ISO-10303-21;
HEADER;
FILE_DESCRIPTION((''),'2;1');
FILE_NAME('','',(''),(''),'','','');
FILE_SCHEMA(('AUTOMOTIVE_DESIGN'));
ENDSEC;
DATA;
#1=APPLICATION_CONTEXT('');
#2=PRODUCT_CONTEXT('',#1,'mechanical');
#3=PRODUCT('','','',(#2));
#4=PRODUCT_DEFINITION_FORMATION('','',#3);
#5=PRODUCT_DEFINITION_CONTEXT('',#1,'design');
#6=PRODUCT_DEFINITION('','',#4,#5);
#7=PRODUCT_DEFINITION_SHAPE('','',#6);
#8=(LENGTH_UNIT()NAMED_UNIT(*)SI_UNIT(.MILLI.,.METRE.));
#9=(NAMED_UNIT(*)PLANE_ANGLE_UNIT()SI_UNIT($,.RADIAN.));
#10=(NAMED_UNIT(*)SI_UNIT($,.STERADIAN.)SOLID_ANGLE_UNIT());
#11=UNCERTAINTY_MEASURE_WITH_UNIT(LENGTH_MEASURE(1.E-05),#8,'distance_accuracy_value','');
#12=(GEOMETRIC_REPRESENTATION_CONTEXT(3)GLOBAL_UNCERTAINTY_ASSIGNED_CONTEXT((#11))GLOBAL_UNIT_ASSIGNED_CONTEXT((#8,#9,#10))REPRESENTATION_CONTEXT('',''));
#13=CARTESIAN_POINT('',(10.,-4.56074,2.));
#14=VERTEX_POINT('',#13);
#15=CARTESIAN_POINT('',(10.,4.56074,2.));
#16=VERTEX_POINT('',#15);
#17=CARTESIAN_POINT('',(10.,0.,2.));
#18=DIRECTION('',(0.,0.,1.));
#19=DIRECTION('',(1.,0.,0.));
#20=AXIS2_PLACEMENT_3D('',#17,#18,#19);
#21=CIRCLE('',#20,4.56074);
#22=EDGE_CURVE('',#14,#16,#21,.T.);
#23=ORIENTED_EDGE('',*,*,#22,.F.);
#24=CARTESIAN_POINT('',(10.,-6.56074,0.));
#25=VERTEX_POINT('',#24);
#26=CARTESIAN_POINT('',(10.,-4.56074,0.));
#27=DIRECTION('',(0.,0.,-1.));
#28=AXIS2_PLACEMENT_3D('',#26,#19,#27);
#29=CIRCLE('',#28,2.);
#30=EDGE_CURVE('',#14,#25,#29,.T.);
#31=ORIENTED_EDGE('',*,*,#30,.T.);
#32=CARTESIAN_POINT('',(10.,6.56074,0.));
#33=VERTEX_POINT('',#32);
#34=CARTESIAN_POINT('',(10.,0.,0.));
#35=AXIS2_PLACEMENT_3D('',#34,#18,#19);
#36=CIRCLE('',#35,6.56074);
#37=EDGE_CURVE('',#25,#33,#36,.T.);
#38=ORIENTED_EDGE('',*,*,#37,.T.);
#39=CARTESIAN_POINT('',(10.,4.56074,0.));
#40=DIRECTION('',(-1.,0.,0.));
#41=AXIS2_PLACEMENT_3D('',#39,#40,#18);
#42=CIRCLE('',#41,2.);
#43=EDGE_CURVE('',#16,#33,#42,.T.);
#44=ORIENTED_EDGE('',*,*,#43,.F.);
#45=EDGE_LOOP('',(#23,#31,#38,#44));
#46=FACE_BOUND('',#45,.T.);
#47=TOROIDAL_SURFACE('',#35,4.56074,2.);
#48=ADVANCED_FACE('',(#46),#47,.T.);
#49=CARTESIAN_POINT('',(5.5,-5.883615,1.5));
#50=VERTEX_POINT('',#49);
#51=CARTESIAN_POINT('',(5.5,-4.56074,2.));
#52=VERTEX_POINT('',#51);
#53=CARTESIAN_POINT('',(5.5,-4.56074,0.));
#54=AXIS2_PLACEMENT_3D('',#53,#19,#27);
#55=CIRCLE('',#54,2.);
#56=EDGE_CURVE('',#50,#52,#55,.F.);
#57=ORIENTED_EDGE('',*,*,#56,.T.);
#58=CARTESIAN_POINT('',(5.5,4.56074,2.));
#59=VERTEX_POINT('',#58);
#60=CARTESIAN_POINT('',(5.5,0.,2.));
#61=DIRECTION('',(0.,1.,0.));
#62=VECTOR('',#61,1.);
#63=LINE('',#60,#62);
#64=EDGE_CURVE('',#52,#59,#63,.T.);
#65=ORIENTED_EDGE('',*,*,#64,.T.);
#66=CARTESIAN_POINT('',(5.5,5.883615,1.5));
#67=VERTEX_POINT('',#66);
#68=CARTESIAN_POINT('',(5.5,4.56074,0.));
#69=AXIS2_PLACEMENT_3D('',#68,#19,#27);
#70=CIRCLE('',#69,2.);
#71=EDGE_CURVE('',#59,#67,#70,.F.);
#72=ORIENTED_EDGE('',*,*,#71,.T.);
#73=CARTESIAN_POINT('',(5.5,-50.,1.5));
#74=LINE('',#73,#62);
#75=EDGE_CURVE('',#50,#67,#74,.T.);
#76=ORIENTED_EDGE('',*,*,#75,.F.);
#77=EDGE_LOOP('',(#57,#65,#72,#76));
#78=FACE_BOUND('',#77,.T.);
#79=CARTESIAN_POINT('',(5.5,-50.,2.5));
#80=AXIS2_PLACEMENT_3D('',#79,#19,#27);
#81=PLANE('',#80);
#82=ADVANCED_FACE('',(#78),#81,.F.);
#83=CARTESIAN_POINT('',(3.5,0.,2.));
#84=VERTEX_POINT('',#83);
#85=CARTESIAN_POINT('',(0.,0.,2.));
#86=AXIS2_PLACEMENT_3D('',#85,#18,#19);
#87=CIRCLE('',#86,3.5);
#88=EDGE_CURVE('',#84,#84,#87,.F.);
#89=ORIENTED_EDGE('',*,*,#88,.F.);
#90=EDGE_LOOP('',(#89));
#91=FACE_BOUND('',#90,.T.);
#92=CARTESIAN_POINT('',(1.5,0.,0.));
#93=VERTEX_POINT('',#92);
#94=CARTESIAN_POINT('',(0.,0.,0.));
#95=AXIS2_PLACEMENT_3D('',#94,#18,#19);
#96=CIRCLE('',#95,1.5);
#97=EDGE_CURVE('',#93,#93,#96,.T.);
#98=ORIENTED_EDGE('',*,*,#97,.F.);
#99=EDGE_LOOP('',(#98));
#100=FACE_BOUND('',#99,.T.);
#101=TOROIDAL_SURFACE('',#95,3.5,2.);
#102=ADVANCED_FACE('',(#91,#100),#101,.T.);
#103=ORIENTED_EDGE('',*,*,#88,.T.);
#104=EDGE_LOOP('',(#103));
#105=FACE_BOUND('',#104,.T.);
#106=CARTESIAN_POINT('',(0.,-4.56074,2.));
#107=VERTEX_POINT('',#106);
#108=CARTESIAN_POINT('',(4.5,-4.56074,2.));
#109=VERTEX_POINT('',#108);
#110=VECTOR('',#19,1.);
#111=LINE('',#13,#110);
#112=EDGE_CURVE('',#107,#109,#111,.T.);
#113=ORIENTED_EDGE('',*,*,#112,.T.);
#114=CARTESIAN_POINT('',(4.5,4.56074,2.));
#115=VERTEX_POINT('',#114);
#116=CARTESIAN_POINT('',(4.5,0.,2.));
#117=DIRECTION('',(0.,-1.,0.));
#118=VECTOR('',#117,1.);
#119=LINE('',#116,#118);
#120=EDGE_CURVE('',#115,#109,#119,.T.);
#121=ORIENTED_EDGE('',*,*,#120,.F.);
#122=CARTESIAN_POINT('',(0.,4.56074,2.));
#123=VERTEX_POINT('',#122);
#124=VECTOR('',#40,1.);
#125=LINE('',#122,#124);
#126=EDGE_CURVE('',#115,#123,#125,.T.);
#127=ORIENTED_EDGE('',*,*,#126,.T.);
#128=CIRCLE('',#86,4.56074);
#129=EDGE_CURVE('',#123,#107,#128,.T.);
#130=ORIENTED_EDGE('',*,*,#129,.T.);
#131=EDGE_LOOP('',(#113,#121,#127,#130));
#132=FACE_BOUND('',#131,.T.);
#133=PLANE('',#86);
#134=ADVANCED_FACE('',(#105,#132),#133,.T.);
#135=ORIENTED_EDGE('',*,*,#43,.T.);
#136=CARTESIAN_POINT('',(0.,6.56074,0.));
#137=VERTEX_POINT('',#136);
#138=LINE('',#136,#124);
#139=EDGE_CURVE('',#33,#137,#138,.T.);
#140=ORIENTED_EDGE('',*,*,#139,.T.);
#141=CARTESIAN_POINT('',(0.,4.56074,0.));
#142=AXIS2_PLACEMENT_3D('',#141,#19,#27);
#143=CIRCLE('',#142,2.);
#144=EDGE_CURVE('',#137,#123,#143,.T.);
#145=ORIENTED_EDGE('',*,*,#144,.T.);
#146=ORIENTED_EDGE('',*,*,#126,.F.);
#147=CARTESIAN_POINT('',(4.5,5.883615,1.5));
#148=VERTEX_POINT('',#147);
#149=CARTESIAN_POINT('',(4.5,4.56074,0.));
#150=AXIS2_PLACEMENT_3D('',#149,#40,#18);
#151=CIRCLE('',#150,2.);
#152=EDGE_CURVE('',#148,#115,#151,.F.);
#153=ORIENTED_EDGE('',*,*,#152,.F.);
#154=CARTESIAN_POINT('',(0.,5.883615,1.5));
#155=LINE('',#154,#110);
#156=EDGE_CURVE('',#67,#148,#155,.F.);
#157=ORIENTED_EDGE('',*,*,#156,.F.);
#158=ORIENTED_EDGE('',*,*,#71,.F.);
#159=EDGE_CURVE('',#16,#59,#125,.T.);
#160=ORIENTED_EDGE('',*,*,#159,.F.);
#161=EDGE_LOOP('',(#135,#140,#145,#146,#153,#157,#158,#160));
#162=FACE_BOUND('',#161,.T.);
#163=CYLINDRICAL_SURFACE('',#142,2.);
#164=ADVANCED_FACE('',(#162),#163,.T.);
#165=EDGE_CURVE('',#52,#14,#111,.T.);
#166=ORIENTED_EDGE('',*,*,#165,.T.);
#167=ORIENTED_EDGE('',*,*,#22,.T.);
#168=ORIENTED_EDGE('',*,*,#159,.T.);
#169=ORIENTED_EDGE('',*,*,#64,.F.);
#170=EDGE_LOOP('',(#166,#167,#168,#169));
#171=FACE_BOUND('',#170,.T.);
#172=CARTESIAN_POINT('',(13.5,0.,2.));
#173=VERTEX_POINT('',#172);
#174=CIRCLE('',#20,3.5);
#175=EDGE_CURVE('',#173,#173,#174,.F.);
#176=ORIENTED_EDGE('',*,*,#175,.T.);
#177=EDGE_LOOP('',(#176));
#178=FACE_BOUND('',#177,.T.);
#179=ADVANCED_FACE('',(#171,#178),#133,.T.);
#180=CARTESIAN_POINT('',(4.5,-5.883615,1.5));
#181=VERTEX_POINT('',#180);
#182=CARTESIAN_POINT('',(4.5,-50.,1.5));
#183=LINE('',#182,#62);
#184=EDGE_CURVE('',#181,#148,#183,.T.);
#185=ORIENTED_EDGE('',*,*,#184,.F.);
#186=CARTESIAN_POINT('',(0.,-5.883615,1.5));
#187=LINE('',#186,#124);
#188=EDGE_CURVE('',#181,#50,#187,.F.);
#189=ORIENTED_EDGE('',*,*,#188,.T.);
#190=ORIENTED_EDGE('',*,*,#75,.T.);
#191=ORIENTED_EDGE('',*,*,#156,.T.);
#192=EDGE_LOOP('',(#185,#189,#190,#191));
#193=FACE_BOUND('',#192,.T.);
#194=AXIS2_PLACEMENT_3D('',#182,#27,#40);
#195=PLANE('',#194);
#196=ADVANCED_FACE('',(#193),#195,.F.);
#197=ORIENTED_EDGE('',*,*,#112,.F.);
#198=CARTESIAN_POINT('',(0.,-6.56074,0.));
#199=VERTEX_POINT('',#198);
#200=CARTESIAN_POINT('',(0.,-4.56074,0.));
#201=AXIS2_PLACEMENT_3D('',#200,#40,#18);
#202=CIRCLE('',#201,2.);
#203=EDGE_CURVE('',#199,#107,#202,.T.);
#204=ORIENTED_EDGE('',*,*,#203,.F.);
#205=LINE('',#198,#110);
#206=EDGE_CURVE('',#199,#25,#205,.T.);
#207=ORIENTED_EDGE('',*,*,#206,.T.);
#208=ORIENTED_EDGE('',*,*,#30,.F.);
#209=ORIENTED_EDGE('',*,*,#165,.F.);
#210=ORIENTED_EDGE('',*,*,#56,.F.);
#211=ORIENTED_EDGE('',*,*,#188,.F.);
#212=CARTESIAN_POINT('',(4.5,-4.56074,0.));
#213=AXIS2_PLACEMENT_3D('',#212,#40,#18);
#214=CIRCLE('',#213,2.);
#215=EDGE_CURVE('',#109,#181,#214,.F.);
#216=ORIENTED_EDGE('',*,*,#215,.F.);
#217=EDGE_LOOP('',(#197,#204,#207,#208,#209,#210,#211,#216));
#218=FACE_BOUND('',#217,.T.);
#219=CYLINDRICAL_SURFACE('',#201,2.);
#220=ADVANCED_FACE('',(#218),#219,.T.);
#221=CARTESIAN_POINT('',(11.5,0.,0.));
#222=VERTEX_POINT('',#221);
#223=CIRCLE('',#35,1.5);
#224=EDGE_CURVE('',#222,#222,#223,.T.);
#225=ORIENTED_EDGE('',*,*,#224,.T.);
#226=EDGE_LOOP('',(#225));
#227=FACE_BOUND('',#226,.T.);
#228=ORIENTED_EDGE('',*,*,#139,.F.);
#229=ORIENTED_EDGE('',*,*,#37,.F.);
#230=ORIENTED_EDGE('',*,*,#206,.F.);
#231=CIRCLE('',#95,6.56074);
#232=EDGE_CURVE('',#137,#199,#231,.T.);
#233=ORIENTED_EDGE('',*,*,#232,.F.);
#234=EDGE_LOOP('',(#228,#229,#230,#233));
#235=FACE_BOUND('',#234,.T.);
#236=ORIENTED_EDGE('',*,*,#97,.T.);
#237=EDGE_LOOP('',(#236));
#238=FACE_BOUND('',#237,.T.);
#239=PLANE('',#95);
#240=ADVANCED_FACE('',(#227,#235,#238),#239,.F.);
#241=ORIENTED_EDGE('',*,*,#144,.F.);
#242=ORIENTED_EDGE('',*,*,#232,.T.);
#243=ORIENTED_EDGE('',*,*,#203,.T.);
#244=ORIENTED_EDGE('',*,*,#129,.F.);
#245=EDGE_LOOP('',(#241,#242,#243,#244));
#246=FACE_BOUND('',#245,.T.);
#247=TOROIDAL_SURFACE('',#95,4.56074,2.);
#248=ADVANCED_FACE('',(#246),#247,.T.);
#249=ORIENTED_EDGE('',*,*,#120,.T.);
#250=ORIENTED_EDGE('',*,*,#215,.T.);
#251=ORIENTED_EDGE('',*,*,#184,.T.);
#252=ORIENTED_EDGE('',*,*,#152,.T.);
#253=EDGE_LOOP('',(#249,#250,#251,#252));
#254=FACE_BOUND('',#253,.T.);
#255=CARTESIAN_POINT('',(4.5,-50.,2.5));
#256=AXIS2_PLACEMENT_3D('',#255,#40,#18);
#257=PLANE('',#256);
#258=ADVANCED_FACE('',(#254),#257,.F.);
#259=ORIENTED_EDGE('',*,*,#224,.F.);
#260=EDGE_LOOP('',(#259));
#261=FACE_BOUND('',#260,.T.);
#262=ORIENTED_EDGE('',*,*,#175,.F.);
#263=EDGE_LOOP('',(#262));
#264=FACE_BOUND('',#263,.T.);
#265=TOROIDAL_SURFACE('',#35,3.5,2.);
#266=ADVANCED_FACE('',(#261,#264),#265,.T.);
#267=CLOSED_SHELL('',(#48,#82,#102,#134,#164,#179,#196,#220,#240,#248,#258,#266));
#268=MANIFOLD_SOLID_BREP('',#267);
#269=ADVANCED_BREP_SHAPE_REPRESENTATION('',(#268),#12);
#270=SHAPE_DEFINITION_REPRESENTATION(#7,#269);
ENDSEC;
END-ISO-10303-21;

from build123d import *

# Parameters (mm, degrees)
SKETCH_1_R          = 1.5
EXTRUDE_1_DEPTH     = 2
FILLET_1_R          = 2
SKETCH_2_W          = 1
SKETCH_2_H          = 1
CUT_EXTRUDE_1_DEPTH = 50


with BuildPart() as part:
    # 草图1 → 凸台-拉伸1 (new body)
    with BuildSketch(Plane.XY):
        with BuildLine():
            Line((0, 6.560739839), (10, 6.560739839))
            ThreePointArc((10, 6.560739839), (16.560739839, 0), (10, -6.560739839))
            Line((10, -6.560739839), (0, -6.560739839))
            ThreePointArc((0, -6.560739839), (-6.560739839, 0), (0, 6.560739839))
        make_face()
        Circle(SKETCH_1_R, mode=Mode.SUBTRACT)
        with Locations((10, 0)):
            Circle(SKETCH_1_R, mode=Mode.SUBTRACT)
    extrude(amount=EXTRUDE_1_DEPTH)

    # 圆角1
    fillet_1_edges = [part.edges().sort_by_distance(p)[0] for p in [
        (8.5, 0, 2),
        (5, 6.560739839, 2),
        (16.560739839, 0, 2),
        (5, -6.560739839, 2),
        (-6.560739839, 0, 2),
        (-1.5, 0, 2),
    ]]
    fillet(fillet_1_edges, radius=FILLET_1_R - 0.0001)  # a hair under: the kernel refuses the full size

    # 草图2 → 切除-拉伸1 (cut, symmetric)
    with BuildSketch(Plane(origin=(0, 0, 0), x_dir=(1, 0, 0), z_dir=(0, 1, 0))):
        with Locations((5, -2)):
            Rectangle(SKETCH_2_W, SKETCH_2_H)
    extrude(amount=CUT_EXTRUDE_1_DEPTH, both=True, mode=Mode.SUBTRACT)


solid = part.part
